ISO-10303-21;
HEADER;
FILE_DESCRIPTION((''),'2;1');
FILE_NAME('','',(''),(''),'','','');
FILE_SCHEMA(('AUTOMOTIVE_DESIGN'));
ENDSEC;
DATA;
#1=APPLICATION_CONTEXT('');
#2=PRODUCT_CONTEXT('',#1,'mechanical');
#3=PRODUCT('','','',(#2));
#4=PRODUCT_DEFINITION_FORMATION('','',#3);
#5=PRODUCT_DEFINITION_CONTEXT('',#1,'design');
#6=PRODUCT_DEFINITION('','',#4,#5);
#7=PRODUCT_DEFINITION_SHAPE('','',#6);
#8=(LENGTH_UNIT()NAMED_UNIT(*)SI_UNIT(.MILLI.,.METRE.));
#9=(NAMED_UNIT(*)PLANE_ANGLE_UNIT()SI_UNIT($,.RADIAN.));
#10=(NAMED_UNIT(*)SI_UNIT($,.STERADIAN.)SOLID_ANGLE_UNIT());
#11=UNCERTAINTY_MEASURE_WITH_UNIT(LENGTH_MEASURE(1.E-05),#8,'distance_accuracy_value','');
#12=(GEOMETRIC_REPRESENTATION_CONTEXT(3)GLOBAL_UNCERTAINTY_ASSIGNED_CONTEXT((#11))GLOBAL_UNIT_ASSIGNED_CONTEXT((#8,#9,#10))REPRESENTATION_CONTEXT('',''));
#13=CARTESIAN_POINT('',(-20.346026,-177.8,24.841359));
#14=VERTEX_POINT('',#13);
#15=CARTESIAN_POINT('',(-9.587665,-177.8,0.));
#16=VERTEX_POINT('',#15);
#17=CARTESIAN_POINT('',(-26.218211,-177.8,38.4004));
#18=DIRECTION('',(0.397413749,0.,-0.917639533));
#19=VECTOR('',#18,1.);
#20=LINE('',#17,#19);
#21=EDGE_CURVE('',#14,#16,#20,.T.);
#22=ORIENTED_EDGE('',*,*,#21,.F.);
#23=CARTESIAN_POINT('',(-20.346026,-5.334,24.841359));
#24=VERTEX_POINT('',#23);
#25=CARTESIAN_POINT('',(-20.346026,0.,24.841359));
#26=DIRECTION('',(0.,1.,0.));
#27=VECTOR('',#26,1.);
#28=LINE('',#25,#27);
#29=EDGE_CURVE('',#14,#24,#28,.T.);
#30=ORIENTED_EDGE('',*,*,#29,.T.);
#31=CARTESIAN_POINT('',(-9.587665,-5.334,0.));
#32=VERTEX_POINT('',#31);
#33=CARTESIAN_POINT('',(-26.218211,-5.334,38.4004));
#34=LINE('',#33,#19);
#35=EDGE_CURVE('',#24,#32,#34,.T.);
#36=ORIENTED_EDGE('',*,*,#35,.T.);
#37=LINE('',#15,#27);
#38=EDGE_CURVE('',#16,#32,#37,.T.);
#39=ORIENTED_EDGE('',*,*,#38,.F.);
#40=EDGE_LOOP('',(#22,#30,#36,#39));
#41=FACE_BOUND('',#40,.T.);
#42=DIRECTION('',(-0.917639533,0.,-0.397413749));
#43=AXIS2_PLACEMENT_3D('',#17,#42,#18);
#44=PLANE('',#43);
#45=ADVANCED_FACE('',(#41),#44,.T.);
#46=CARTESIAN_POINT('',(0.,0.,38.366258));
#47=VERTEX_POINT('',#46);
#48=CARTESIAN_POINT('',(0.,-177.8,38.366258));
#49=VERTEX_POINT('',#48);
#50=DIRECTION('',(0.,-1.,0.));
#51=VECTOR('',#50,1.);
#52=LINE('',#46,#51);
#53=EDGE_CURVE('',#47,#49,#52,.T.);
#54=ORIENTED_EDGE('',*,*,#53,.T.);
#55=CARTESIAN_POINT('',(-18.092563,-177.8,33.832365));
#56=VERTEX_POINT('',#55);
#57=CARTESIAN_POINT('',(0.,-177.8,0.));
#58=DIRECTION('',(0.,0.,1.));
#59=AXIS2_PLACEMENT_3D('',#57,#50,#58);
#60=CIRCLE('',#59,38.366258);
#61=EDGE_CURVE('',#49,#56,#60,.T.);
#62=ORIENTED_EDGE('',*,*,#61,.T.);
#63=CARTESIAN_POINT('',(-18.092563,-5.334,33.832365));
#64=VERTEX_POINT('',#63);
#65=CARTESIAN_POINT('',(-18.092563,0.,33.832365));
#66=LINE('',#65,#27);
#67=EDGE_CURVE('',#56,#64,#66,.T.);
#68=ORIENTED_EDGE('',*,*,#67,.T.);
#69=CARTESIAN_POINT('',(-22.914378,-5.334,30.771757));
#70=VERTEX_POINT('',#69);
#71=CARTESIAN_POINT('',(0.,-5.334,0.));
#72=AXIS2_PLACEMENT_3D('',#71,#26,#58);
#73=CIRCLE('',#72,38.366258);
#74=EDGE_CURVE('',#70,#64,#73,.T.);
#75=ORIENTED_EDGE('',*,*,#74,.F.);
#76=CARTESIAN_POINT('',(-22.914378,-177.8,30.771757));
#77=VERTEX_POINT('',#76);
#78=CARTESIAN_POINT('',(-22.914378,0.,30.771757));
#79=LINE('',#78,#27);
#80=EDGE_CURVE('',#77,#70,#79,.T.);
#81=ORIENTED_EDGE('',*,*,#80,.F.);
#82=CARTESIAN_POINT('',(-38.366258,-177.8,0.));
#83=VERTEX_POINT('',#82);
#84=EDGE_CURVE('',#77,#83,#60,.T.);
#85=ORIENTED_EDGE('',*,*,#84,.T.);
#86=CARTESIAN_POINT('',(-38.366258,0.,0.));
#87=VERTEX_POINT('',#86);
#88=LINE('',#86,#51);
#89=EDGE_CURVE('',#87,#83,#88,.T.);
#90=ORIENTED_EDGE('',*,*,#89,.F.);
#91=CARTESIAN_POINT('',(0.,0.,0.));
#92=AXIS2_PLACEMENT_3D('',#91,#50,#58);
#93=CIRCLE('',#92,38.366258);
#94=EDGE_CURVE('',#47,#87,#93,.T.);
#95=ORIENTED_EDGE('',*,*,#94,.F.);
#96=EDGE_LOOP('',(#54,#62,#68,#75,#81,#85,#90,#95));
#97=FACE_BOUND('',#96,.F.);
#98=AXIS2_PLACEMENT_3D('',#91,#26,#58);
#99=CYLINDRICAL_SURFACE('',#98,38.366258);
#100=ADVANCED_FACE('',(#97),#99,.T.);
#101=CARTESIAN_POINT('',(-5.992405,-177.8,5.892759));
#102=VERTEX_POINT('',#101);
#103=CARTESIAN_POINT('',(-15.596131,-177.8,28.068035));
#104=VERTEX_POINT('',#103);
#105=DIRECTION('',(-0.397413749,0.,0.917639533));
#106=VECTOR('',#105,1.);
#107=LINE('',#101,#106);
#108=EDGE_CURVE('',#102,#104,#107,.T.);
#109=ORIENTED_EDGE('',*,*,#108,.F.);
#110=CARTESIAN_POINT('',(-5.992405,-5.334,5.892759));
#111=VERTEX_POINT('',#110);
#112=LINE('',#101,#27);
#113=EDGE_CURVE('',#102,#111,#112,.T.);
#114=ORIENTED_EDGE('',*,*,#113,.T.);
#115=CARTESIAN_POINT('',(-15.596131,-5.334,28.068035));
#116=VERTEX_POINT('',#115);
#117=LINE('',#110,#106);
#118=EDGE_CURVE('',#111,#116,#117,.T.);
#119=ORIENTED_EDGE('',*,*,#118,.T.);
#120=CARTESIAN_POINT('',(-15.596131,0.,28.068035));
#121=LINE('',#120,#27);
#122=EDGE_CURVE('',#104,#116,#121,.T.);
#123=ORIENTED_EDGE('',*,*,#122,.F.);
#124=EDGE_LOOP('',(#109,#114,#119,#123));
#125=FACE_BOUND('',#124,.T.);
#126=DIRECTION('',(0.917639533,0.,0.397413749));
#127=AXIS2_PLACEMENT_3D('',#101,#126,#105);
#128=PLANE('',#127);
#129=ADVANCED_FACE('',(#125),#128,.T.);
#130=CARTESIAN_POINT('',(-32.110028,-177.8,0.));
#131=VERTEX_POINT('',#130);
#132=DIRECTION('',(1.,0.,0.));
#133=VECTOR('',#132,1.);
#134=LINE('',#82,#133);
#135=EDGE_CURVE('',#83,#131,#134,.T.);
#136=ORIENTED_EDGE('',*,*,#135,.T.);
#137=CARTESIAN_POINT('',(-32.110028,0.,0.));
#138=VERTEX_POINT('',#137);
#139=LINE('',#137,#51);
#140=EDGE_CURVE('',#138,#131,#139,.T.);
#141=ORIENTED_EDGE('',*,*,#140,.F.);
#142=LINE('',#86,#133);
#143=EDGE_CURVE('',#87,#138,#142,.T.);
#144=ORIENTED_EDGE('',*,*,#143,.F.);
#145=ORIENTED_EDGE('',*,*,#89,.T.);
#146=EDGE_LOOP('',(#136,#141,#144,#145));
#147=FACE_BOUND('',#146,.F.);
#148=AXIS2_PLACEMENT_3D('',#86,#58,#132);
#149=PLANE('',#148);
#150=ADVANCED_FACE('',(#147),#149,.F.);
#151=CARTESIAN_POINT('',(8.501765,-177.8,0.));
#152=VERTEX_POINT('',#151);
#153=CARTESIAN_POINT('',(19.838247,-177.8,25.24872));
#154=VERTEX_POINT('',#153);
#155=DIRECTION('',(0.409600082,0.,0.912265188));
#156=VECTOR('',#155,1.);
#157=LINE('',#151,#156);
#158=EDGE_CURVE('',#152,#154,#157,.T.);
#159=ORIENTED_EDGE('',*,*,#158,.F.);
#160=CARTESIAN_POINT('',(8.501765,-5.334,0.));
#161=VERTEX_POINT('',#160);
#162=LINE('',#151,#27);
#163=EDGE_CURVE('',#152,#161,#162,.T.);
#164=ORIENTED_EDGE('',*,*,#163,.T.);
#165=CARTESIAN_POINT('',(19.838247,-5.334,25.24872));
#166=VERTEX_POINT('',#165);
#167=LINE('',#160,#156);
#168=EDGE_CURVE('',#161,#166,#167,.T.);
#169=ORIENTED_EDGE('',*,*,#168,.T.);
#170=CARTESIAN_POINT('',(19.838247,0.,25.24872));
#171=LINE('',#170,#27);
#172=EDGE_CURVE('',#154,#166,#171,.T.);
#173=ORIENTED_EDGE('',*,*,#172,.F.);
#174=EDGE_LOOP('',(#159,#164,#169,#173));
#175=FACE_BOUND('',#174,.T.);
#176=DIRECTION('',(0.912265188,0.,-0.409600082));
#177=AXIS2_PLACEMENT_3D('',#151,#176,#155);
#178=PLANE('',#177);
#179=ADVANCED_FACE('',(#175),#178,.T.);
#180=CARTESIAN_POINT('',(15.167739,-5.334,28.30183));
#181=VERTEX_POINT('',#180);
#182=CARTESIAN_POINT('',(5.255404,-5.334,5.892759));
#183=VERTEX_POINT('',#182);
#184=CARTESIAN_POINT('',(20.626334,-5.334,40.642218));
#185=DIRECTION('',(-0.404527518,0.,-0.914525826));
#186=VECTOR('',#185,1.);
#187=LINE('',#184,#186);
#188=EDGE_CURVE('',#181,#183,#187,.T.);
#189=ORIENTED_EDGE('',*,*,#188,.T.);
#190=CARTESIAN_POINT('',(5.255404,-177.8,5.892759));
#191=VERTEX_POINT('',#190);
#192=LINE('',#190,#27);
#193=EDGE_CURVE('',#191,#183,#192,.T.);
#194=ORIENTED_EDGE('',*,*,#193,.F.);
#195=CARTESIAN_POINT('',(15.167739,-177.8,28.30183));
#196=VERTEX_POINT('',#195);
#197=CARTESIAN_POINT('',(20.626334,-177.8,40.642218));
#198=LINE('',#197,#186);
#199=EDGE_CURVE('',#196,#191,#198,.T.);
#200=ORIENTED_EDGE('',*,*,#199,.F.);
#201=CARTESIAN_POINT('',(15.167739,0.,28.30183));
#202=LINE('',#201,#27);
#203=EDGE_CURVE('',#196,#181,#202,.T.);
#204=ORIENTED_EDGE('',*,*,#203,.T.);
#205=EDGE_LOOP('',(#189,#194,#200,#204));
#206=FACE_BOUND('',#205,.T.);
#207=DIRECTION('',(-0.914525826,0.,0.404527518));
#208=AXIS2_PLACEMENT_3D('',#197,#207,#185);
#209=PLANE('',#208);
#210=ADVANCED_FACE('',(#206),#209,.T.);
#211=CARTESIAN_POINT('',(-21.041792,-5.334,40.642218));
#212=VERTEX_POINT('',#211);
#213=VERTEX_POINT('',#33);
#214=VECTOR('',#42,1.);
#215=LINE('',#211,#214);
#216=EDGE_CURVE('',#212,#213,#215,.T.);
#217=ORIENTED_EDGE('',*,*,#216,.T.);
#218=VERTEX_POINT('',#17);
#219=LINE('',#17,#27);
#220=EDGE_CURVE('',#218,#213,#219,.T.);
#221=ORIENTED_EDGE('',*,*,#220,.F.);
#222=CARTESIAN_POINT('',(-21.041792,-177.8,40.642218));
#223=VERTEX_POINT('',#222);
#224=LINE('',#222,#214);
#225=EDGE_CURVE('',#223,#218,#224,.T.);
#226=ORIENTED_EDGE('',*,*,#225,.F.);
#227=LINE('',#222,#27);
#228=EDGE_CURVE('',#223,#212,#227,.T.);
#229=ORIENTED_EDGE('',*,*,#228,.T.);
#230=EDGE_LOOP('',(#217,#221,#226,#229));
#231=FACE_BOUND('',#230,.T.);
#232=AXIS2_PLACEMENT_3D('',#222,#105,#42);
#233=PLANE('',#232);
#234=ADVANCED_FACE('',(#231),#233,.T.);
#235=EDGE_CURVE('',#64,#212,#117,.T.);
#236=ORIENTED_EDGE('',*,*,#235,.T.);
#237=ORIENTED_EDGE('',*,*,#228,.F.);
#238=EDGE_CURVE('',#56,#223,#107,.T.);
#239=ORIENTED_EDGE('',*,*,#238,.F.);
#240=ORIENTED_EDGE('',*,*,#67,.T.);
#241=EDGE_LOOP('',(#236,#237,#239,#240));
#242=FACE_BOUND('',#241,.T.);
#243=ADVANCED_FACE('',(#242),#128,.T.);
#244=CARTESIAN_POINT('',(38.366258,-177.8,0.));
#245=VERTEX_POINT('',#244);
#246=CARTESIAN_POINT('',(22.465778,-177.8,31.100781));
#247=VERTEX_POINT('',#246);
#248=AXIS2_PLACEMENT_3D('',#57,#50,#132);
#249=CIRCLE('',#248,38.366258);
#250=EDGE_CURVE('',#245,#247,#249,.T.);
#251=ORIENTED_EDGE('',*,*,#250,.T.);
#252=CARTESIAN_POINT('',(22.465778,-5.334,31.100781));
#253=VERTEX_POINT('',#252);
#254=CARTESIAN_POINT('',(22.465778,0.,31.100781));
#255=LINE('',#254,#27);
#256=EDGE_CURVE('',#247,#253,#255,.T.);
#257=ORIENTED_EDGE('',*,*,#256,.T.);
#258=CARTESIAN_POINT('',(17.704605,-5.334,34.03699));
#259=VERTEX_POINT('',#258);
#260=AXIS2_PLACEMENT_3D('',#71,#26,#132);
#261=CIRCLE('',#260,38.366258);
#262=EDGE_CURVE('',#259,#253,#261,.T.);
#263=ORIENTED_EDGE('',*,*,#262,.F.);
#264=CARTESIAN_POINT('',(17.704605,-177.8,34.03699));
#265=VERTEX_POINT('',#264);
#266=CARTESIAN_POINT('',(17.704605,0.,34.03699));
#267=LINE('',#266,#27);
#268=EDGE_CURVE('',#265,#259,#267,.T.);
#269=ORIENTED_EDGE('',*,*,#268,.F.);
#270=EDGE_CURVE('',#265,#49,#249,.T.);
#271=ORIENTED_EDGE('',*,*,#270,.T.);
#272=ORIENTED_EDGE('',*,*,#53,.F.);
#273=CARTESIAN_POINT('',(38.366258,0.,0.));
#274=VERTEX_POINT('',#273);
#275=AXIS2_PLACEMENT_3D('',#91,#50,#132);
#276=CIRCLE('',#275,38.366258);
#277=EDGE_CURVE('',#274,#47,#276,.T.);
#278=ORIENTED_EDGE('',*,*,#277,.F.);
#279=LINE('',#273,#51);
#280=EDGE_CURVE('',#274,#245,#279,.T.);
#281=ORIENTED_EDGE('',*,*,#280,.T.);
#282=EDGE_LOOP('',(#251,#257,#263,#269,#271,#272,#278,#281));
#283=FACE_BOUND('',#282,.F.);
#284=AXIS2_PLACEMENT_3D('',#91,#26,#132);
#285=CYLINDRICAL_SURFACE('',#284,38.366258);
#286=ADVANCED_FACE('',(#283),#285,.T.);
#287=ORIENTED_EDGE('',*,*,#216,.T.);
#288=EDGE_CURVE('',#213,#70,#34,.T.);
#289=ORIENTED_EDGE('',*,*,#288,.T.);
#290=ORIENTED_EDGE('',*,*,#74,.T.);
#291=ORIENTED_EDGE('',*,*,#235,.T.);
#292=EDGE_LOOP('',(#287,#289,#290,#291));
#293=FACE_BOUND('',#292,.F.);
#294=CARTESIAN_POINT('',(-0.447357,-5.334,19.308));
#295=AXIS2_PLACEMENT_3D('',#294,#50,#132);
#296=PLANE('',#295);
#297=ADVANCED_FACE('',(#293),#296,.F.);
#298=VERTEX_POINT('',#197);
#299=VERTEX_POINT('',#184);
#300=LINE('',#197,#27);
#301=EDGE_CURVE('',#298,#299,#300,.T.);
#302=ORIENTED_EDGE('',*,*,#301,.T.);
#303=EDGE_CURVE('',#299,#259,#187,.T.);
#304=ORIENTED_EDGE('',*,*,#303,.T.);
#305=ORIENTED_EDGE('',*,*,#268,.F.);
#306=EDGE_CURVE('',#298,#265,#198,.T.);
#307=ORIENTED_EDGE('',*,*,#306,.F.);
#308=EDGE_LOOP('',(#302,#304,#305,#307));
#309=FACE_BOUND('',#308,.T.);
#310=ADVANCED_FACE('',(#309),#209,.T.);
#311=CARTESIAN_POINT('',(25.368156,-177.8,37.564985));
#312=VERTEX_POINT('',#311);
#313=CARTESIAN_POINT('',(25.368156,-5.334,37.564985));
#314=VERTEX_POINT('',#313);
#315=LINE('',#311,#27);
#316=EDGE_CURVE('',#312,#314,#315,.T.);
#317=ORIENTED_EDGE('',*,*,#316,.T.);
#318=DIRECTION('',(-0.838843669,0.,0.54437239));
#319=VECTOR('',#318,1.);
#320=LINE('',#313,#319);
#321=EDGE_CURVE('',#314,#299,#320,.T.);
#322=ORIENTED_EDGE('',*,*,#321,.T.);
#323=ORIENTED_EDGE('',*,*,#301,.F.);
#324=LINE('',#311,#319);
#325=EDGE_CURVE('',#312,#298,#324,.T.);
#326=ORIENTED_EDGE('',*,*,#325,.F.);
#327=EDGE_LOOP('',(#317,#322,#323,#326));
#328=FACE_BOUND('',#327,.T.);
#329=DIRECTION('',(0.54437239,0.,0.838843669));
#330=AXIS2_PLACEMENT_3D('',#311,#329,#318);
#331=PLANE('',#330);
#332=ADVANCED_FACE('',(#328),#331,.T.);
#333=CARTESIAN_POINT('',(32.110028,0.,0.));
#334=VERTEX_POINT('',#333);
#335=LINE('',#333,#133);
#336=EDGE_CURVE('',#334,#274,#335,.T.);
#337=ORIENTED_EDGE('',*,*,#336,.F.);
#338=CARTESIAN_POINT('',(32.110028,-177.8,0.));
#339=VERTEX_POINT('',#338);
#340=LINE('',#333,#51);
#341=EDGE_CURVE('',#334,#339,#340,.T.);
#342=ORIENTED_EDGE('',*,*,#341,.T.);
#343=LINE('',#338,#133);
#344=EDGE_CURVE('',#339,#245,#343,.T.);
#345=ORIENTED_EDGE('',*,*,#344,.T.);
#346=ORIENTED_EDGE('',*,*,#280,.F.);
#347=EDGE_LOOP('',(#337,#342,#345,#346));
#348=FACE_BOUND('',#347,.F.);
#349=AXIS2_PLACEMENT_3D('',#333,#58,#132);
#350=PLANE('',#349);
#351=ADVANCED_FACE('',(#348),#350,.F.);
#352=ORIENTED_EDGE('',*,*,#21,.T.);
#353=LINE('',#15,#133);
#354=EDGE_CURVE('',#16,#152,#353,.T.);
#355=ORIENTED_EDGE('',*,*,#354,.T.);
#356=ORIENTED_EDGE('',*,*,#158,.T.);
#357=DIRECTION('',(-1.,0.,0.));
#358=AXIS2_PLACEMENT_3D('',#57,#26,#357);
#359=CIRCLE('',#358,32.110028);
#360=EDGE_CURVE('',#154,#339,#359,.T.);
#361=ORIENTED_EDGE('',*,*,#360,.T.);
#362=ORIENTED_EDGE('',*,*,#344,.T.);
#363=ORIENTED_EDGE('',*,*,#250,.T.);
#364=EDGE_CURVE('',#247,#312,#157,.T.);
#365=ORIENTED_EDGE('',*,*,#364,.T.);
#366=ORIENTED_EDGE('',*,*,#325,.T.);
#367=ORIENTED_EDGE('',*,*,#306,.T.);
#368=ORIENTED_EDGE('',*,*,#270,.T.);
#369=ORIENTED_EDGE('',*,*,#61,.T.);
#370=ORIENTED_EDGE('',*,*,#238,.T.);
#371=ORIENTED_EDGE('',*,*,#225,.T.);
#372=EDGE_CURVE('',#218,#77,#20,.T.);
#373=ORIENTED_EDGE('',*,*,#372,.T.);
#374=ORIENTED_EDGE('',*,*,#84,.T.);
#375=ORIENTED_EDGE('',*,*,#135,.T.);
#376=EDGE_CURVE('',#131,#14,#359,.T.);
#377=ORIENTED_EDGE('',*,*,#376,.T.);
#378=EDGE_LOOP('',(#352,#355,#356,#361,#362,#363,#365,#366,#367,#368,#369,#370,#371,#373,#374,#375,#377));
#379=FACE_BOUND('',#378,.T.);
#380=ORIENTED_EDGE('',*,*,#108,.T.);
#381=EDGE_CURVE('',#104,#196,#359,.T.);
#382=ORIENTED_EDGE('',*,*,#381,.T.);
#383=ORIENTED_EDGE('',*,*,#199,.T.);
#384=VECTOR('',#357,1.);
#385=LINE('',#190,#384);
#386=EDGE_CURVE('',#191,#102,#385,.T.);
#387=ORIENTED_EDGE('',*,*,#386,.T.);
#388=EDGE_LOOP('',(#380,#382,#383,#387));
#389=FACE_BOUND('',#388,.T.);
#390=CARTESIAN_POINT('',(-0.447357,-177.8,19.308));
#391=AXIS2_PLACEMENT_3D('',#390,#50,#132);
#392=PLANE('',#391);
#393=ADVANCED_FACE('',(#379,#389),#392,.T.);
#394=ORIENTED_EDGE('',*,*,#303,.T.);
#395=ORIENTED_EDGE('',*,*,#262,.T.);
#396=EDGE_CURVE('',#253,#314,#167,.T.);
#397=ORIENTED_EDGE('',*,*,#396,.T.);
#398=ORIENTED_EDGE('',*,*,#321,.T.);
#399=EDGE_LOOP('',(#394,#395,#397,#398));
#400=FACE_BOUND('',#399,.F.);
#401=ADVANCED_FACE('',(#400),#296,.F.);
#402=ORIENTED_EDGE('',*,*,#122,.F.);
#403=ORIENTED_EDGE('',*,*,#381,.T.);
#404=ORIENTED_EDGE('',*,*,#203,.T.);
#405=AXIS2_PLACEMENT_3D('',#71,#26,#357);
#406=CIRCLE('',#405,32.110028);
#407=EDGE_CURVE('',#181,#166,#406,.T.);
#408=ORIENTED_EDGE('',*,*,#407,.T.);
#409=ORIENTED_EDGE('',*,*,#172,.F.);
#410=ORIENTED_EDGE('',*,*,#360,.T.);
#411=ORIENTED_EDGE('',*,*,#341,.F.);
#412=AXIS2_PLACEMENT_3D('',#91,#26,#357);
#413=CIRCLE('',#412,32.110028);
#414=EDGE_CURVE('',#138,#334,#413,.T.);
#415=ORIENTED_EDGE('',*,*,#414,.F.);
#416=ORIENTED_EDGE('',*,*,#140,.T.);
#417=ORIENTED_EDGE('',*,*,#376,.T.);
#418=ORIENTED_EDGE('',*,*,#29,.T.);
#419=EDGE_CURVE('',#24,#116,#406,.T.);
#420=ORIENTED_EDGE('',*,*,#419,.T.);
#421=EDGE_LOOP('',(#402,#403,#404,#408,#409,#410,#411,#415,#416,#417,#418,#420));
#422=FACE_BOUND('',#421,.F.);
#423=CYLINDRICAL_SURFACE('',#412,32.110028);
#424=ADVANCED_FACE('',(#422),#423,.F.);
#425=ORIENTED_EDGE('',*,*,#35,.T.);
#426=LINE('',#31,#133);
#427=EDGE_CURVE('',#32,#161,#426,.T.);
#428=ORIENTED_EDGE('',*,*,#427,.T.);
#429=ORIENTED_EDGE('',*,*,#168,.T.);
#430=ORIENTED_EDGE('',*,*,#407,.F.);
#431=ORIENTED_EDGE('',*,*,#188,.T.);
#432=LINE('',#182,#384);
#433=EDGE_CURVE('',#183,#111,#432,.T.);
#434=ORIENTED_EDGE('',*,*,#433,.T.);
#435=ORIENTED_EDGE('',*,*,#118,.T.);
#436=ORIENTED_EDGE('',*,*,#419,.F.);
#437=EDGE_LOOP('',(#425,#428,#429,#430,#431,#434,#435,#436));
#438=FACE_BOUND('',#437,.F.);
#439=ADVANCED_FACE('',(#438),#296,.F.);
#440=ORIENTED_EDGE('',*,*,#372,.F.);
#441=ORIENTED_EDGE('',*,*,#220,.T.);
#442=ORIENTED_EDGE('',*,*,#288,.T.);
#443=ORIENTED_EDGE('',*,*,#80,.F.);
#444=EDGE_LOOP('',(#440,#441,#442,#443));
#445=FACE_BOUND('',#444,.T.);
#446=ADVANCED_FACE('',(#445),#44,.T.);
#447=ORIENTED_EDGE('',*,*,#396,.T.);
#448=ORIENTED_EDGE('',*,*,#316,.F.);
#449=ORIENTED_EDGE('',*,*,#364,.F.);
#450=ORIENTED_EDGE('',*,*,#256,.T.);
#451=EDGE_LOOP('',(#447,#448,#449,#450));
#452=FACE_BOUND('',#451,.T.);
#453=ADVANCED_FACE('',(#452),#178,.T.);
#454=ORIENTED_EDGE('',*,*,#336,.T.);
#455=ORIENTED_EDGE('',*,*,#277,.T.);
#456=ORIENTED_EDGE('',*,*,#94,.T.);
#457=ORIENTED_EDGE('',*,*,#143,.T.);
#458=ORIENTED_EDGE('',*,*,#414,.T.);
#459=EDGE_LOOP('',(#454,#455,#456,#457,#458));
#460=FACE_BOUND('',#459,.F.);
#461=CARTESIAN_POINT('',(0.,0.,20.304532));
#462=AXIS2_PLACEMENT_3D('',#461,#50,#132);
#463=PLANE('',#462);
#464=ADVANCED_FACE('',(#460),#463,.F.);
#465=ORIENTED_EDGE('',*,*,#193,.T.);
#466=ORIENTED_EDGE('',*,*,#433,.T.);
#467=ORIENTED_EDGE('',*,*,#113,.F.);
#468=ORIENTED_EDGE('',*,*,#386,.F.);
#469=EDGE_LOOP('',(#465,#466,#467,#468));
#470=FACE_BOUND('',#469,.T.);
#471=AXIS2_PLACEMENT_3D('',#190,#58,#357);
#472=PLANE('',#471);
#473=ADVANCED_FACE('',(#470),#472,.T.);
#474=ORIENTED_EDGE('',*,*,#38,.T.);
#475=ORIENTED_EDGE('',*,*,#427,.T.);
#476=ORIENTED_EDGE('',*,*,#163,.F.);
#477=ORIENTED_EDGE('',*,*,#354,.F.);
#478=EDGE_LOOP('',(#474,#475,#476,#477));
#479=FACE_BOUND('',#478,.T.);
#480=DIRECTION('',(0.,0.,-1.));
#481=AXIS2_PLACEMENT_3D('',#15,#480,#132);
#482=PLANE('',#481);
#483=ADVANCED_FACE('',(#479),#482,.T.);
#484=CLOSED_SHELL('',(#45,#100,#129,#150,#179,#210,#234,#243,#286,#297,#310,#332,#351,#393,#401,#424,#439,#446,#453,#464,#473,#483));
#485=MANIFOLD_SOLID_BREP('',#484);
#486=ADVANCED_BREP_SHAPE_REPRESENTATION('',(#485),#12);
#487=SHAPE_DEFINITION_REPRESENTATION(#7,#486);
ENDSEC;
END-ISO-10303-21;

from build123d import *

# Parameters (mm, degrees)
F1_DEPTH = 177.8
F3_DEPTH = 172.466


# Not quite as in the source:
# - a feature names something its author has since deleted; it is built from what else it names


with BuildPart() as f1:
    # F0 (on Front) → F1 (new body)
    with BuildSketch(Plane.XZ):
        with BuildLine():
            ThreePointArc((-32.1100279689, 0), (-22.7052185209, 22.7052185209), (0, 32.1100279689))
            ThreePointArc((0, 32.1100279689), (22.7052185209, 22.7052185209), (32.1100279689, 0))
            Line((32.1100279689, 0), (38.3662581444, 0))
            ThreePointArc((38.3662581444, 0), (27.1290413026, 27.1290413026), (0, 38.3662581444))
            ThreePointArc((0, 38.3662581444), (-27.1290413026, 27.1290413026), (-38.3662581444, 0))
            Line((-38.3662581444, 0), (-32.1100279689, 0))
        make_face()
    extrude(amount=F1_DEPTH)

    # F2 (on face) → F3 (join)
    with BuildSketch(Plane.XZ.offset(177.8)):
        Polygon((-26.2182112783, 38.40040043), (-9.5876645925, 0), (0, 0), (8.5017651877, 0), (25.3681559116, 37.5649854541), (20.6263340544, 40.6422178311), (5.2554043941, 5.8927594628), (-5.9924047246, 5.8927594628), (-21.0417917943, 40.6422178311), align=None)
    extrude(amount=-F3_DEPTH)


solid = f1.part
